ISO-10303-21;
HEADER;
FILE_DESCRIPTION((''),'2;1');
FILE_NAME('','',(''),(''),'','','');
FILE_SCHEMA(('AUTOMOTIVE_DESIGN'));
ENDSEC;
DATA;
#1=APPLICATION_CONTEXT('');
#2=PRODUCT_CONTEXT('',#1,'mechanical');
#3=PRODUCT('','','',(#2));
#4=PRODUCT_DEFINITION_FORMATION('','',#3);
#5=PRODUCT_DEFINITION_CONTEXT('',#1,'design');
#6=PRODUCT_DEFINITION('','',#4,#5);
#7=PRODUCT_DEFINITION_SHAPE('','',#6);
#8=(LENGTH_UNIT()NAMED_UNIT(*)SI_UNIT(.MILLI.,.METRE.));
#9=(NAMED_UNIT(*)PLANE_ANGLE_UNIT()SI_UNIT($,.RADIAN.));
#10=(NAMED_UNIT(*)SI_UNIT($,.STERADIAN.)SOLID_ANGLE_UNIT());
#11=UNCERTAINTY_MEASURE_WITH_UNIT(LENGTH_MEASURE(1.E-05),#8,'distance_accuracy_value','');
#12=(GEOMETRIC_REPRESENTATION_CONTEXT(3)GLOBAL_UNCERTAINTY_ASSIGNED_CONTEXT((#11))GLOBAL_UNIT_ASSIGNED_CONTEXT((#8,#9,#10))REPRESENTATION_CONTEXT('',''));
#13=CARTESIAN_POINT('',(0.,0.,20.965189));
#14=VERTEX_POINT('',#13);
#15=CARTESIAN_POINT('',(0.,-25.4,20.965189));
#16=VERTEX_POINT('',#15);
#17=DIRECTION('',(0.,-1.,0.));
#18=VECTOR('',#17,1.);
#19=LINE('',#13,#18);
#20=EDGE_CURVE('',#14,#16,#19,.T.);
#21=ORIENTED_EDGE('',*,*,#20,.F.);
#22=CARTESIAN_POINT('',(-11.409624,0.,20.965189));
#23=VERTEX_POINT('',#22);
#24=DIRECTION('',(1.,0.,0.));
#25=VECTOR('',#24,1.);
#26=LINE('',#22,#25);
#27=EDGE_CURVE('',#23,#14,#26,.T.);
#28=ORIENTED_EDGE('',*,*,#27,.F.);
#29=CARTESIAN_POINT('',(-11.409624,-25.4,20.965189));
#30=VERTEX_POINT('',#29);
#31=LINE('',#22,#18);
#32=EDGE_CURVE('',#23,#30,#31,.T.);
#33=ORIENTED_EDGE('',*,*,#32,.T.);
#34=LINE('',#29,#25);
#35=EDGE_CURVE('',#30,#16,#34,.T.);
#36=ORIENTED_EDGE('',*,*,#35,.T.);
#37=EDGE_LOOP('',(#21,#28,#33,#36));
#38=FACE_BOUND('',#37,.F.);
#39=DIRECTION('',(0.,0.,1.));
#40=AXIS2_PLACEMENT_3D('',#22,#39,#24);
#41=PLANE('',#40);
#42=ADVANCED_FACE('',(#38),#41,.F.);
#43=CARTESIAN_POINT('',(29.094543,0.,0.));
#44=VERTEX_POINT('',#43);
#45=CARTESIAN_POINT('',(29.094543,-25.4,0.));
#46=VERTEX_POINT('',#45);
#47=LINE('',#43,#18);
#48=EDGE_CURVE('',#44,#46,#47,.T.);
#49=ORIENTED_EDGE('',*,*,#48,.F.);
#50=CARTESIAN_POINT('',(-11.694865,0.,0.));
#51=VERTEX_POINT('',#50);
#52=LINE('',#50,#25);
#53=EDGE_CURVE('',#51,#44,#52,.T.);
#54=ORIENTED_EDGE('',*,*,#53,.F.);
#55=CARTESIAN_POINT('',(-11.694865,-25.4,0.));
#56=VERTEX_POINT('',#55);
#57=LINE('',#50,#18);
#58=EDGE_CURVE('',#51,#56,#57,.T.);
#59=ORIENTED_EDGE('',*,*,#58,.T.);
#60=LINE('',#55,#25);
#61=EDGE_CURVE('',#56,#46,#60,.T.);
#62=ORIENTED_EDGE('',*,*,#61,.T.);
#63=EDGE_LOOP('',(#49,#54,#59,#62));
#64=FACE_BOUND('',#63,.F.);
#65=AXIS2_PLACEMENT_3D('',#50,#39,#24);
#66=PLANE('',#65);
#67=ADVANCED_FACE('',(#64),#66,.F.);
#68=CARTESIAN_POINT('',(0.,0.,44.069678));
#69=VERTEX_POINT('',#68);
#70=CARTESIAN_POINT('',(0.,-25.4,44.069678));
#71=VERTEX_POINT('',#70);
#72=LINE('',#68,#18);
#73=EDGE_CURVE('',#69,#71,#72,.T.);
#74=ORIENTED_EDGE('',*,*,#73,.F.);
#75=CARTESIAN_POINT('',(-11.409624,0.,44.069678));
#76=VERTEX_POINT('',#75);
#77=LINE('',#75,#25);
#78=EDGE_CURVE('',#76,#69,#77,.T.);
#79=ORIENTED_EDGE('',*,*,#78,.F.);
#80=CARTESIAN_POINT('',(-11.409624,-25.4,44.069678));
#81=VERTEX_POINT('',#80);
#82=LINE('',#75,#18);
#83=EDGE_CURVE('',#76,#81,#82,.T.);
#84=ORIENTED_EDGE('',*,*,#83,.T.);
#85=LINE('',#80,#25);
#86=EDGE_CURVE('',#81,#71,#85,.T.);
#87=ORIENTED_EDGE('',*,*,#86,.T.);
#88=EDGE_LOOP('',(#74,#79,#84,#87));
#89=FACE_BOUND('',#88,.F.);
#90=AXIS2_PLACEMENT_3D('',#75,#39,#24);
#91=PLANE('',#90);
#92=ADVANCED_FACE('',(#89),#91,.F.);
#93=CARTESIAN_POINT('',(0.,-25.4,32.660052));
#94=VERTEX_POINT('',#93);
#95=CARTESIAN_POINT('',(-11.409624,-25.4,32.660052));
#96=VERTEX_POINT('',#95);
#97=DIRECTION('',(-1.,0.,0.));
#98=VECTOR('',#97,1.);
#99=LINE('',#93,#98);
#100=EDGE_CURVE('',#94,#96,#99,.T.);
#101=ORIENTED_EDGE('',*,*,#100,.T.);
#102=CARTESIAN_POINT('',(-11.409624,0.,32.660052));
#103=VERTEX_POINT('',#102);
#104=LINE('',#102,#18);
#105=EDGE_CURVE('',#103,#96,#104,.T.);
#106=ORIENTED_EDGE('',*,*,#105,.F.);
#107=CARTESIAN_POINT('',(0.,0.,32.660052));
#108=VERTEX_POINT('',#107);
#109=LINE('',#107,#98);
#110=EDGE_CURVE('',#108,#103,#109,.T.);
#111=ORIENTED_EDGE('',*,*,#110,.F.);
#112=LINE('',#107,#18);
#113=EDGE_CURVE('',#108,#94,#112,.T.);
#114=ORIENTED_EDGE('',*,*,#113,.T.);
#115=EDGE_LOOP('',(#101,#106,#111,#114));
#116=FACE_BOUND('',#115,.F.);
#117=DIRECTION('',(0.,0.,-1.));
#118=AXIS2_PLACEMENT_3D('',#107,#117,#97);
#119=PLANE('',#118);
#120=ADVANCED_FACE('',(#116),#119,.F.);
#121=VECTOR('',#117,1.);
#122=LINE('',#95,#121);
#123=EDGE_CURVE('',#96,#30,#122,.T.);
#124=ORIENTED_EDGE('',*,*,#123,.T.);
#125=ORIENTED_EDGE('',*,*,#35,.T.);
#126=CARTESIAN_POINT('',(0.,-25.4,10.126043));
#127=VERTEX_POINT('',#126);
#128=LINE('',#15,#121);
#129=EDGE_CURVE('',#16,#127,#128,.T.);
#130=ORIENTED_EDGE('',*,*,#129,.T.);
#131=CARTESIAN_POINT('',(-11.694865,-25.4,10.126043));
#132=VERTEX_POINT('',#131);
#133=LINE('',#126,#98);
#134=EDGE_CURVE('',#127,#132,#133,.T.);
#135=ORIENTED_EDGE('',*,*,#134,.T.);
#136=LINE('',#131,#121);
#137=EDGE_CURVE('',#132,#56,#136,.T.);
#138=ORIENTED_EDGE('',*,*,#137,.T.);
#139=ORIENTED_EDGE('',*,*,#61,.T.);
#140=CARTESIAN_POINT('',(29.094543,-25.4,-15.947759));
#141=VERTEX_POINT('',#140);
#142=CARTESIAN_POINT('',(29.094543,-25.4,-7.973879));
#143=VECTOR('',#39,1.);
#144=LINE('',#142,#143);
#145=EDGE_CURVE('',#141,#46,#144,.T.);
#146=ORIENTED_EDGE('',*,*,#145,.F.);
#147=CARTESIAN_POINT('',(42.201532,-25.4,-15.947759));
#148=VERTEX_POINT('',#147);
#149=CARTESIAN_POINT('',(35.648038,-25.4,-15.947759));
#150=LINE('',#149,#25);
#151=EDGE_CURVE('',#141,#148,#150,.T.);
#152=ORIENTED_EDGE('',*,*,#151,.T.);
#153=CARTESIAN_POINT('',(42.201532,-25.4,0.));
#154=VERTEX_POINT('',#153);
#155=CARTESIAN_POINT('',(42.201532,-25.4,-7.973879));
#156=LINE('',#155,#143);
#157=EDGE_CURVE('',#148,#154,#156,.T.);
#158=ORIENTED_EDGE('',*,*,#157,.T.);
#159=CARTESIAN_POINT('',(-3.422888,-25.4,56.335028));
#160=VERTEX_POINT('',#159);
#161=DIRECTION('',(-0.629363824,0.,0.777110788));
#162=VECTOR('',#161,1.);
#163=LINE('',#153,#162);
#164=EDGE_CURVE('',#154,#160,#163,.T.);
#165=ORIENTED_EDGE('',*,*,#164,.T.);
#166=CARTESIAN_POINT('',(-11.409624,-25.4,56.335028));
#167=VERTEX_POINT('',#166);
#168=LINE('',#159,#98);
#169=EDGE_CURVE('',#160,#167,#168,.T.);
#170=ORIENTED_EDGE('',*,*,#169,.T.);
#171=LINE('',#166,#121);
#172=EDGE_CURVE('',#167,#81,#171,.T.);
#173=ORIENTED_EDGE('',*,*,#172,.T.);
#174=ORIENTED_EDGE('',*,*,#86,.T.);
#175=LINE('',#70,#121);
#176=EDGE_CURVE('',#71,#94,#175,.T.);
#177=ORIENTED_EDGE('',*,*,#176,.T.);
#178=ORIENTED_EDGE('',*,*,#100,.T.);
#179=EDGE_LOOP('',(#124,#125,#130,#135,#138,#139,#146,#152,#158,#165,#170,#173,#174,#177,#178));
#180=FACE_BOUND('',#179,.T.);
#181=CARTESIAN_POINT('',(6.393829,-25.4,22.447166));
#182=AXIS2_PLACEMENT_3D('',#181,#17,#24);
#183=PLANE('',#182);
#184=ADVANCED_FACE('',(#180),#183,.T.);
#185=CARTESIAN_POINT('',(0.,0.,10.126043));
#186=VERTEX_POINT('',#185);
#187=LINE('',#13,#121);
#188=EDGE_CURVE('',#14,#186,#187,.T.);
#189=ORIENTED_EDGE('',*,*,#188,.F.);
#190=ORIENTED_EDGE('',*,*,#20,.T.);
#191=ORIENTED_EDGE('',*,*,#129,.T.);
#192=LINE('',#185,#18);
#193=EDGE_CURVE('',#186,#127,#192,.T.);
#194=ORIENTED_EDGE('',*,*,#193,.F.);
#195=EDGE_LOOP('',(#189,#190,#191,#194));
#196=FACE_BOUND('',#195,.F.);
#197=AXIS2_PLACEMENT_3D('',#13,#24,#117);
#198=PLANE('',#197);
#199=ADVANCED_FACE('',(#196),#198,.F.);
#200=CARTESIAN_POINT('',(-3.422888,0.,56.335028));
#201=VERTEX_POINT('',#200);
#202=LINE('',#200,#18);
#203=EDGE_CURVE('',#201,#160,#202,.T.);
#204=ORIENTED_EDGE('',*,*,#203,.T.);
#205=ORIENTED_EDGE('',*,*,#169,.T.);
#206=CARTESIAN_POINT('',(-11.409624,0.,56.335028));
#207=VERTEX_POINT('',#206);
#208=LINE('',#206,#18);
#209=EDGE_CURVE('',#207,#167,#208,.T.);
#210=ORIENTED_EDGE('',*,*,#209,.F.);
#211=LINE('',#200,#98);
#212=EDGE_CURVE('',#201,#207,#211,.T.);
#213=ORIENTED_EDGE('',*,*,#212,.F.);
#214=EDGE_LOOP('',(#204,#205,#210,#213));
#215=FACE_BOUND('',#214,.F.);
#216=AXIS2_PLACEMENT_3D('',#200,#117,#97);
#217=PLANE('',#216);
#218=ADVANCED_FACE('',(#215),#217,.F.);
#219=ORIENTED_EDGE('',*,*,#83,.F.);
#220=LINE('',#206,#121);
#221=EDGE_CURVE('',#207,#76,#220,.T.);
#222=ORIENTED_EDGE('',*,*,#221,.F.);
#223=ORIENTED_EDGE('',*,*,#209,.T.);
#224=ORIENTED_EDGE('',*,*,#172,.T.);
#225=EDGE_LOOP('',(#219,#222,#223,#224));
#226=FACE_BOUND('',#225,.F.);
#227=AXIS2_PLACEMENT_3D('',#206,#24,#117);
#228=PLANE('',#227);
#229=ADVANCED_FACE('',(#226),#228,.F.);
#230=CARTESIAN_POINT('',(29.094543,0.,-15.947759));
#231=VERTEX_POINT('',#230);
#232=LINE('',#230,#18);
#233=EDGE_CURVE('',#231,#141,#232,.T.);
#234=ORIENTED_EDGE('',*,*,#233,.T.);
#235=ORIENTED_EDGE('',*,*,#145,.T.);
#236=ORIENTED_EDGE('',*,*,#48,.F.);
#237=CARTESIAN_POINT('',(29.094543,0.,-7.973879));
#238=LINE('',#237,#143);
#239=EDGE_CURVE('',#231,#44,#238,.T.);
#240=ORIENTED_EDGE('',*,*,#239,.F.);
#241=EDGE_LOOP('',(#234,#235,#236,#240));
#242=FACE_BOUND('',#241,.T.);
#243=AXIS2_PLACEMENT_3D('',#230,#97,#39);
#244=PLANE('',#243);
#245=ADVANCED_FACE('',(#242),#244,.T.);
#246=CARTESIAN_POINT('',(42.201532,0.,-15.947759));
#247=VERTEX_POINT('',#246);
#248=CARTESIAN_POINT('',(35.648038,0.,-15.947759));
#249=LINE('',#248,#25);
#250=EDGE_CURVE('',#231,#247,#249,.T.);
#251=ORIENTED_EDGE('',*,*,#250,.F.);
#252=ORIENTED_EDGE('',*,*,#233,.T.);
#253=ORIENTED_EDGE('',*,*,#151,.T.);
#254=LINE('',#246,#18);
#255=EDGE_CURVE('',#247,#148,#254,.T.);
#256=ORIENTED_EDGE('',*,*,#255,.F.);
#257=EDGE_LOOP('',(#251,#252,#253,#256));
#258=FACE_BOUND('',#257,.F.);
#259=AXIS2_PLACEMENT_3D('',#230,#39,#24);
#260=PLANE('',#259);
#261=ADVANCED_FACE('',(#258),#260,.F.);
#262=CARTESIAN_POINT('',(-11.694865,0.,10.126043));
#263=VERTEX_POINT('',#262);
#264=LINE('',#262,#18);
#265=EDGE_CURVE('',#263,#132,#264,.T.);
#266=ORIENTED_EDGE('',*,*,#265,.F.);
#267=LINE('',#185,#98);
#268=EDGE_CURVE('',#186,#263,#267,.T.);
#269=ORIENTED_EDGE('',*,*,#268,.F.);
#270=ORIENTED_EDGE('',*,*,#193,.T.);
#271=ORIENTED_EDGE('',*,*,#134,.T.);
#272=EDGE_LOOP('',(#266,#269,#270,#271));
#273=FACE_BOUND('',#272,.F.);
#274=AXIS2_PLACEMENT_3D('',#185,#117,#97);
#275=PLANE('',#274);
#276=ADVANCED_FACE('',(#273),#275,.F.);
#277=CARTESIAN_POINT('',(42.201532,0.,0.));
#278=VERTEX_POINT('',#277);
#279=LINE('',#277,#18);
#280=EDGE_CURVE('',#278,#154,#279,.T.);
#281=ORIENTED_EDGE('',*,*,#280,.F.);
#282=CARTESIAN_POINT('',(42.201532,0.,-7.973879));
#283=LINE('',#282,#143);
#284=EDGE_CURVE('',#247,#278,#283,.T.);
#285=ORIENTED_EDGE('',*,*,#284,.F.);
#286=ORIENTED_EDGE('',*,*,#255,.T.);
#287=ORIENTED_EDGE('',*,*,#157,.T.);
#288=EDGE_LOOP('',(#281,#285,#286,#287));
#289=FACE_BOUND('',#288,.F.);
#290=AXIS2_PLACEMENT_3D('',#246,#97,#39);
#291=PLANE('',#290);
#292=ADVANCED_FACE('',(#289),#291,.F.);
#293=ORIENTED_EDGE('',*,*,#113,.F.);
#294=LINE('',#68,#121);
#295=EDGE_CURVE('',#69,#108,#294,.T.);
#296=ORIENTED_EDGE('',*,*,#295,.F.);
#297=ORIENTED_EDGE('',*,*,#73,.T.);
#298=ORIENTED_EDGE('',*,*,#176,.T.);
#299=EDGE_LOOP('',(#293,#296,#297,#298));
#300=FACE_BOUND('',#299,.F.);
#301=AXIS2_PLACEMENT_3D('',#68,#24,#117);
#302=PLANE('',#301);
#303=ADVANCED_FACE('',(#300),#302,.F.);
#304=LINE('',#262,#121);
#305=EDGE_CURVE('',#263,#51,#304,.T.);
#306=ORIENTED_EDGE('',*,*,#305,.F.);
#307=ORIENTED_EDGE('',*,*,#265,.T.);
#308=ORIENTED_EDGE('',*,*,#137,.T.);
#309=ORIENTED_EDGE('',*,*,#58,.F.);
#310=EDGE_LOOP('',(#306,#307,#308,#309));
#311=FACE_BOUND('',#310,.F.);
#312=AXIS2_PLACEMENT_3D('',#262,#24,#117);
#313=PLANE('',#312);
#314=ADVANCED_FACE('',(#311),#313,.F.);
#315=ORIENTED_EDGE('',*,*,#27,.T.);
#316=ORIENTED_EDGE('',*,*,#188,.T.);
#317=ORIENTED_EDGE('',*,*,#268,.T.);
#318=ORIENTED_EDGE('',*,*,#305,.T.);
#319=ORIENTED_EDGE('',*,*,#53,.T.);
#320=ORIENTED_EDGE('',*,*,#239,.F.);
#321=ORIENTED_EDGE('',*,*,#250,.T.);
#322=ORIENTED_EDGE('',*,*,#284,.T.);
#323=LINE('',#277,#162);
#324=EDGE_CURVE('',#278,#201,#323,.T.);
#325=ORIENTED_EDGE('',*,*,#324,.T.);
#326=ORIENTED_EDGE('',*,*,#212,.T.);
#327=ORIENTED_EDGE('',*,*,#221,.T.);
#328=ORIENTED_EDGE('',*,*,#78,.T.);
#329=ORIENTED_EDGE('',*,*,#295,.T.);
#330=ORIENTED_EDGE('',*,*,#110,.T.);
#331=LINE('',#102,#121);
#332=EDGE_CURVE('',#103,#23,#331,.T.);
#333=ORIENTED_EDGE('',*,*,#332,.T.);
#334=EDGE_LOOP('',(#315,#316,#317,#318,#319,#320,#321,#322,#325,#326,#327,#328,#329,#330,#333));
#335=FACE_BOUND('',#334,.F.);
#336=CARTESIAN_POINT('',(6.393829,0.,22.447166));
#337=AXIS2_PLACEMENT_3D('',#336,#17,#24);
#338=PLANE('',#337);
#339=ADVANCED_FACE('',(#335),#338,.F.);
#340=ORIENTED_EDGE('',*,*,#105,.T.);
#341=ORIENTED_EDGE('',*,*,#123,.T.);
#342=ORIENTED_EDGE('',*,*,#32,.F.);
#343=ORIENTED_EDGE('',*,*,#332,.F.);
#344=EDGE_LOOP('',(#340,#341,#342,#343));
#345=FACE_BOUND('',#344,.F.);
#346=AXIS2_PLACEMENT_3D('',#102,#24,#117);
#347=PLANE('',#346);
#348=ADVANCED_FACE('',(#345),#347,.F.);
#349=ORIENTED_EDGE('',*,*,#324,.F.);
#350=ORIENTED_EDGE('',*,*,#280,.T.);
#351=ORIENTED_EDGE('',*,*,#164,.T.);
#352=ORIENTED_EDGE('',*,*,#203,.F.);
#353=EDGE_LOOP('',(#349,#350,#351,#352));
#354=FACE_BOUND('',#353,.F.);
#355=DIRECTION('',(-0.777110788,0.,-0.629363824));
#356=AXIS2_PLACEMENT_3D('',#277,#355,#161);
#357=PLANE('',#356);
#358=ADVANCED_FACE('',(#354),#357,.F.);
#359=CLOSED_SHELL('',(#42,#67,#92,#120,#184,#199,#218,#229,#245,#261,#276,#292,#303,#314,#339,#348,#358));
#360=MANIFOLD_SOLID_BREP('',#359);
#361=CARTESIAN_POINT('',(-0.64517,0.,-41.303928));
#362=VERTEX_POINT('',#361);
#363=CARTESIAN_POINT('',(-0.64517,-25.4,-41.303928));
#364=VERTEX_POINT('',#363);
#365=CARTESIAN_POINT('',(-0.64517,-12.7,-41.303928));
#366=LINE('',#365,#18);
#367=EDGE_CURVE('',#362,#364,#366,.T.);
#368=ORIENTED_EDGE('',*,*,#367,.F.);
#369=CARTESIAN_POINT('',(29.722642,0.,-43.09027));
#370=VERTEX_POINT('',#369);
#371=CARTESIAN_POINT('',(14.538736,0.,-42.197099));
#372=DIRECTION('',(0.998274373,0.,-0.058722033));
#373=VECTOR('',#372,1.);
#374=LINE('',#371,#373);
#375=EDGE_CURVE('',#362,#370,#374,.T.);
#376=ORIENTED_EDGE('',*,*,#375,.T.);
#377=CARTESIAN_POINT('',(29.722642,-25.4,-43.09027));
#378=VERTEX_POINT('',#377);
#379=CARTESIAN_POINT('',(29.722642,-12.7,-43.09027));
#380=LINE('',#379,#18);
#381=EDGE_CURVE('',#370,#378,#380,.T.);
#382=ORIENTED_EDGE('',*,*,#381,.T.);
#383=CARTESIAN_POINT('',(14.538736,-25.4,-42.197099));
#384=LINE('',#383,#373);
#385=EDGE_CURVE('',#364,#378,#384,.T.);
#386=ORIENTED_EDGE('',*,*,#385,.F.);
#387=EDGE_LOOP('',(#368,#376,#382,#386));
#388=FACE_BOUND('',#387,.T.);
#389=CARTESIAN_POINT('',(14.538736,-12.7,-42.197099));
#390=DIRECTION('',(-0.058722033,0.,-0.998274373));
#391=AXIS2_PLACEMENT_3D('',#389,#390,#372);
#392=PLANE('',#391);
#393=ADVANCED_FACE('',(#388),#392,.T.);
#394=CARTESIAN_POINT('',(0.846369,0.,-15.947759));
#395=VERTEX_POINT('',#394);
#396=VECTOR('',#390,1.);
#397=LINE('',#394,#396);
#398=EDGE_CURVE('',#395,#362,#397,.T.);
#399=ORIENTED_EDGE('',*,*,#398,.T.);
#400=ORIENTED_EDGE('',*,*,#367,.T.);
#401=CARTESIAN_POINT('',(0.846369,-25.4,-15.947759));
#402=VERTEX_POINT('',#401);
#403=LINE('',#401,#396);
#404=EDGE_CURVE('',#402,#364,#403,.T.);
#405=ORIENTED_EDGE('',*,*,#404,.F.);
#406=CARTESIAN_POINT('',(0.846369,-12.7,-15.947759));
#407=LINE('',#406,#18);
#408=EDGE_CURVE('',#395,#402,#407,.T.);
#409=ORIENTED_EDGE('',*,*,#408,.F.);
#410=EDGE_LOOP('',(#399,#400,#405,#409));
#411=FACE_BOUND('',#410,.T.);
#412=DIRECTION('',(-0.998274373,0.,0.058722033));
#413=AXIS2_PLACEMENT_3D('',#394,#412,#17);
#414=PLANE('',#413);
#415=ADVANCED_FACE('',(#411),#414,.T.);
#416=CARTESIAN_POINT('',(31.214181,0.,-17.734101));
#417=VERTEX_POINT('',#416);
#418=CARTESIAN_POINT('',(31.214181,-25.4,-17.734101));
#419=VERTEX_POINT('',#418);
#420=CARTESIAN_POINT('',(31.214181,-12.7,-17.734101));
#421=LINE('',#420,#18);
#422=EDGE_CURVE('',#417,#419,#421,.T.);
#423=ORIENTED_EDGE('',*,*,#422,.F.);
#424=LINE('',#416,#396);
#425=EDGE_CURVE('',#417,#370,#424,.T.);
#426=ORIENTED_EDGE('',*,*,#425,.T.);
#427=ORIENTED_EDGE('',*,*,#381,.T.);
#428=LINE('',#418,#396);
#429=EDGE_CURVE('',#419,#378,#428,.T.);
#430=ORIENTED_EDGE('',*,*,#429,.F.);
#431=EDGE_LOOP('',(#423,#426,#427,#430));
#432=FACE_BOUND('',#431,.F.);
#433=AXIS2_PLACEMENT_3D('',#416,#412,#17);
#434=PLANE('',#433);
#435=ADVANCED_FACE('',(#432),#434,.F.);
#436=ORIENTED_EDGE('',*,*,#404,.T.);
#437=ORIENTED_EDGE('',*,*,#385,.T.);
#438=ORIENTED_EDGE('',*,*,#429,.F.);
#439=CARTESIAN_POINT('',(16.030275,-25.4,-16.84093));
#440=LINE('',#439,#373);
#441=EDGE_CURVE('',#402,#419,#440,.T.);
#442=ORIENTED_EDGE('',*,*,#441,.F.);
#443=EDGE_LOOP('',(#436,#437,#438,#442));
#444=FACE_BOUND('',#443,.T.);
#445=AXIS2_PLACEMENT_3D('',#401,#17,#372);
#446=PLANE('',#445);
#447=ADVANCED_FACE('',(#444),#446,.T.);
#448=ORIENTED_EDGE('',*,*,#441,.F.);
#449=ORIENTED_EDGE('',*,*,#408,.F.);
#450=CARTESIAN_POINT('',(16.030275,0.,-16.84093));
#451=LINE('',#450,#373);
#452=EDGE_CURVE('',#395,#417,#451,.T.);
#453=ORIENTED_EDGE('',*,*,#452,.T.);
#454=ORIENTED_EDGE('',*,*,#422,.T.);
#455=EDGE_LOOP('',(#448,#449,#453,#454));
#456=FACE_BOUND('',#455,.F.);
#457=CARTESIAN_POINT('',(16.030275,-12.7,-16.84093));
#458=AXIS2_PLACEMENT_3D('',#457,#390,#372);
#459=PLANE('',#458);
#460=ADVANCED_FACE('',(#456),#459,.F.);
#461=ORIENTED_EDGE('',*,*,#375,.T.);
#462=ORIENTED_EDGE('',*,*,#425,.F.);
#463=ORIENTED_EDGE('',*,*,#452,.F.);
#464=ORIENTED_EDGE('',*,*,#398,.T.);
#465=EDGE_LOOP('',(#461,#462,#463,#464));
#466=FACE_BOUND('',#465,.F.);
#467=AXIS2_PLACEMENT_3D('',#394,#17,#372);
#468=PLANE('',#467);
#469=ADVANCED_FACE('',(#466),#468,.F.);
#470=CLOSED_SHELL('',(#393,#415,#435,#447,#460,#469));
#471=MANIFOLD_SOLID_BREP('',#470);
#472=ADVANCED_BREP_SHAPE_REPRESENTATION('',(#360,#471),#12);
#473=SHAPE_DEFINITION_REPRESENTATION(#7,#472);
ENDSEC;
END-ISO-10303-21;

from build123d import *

# Parameters (mm, degrees)
F0_W     = 13.1069884534
F0_H     = 15.9477586227
F2_DEPTH = 25.4
F1_E23_W = 30.420306172
F1_E23_H = 25.4
F3_DEPTH = 25.4


with BuildPart() as f2:
    # F0 (on Front) → F2 (new body)
    with BuildSketch(Plane.XZ):
        Polygon((-3.4228879958, 56.3350282609), (-11.4096244797, 56.3350282609), (-11.4096244797, 44.0696775913), (0, 44.0696775913), (0, 32.6600521803), (-11.4096244797, 32.6600521803), (-11.4096244797, 20.9651887417), (0, 20.9651887417), (0, 10.1260431111), (-11.6948653013, 10.1260431111), (-11.6948653013, 0), (29.094543308, 0), (42.2015317614, 0), align=None)
        with Locations((35.6480375347, -7.9738793114)):
            Rectangle(F0_W, F0_H)
    extrude(amount=F2_DEPTH)


with BuildPart() as f3:
    # F1_E23 (on explicit) → F3 (new body)
    with BuildSketch(Plane(origin=(0.8463693679, 0, -15.9477586227), x_dir=(0.9982743725, 0, -0.0587220332), z_dir=(-0.0587220332, 0, -0.9982743725))):
        with Locations((15.210153086, 12.7)):
            Rectangle(F1_E23_W, F1_E23_H)
    extrude(amount=F3_DEPTH)


solid = Compound([f2.part, f3.part])
